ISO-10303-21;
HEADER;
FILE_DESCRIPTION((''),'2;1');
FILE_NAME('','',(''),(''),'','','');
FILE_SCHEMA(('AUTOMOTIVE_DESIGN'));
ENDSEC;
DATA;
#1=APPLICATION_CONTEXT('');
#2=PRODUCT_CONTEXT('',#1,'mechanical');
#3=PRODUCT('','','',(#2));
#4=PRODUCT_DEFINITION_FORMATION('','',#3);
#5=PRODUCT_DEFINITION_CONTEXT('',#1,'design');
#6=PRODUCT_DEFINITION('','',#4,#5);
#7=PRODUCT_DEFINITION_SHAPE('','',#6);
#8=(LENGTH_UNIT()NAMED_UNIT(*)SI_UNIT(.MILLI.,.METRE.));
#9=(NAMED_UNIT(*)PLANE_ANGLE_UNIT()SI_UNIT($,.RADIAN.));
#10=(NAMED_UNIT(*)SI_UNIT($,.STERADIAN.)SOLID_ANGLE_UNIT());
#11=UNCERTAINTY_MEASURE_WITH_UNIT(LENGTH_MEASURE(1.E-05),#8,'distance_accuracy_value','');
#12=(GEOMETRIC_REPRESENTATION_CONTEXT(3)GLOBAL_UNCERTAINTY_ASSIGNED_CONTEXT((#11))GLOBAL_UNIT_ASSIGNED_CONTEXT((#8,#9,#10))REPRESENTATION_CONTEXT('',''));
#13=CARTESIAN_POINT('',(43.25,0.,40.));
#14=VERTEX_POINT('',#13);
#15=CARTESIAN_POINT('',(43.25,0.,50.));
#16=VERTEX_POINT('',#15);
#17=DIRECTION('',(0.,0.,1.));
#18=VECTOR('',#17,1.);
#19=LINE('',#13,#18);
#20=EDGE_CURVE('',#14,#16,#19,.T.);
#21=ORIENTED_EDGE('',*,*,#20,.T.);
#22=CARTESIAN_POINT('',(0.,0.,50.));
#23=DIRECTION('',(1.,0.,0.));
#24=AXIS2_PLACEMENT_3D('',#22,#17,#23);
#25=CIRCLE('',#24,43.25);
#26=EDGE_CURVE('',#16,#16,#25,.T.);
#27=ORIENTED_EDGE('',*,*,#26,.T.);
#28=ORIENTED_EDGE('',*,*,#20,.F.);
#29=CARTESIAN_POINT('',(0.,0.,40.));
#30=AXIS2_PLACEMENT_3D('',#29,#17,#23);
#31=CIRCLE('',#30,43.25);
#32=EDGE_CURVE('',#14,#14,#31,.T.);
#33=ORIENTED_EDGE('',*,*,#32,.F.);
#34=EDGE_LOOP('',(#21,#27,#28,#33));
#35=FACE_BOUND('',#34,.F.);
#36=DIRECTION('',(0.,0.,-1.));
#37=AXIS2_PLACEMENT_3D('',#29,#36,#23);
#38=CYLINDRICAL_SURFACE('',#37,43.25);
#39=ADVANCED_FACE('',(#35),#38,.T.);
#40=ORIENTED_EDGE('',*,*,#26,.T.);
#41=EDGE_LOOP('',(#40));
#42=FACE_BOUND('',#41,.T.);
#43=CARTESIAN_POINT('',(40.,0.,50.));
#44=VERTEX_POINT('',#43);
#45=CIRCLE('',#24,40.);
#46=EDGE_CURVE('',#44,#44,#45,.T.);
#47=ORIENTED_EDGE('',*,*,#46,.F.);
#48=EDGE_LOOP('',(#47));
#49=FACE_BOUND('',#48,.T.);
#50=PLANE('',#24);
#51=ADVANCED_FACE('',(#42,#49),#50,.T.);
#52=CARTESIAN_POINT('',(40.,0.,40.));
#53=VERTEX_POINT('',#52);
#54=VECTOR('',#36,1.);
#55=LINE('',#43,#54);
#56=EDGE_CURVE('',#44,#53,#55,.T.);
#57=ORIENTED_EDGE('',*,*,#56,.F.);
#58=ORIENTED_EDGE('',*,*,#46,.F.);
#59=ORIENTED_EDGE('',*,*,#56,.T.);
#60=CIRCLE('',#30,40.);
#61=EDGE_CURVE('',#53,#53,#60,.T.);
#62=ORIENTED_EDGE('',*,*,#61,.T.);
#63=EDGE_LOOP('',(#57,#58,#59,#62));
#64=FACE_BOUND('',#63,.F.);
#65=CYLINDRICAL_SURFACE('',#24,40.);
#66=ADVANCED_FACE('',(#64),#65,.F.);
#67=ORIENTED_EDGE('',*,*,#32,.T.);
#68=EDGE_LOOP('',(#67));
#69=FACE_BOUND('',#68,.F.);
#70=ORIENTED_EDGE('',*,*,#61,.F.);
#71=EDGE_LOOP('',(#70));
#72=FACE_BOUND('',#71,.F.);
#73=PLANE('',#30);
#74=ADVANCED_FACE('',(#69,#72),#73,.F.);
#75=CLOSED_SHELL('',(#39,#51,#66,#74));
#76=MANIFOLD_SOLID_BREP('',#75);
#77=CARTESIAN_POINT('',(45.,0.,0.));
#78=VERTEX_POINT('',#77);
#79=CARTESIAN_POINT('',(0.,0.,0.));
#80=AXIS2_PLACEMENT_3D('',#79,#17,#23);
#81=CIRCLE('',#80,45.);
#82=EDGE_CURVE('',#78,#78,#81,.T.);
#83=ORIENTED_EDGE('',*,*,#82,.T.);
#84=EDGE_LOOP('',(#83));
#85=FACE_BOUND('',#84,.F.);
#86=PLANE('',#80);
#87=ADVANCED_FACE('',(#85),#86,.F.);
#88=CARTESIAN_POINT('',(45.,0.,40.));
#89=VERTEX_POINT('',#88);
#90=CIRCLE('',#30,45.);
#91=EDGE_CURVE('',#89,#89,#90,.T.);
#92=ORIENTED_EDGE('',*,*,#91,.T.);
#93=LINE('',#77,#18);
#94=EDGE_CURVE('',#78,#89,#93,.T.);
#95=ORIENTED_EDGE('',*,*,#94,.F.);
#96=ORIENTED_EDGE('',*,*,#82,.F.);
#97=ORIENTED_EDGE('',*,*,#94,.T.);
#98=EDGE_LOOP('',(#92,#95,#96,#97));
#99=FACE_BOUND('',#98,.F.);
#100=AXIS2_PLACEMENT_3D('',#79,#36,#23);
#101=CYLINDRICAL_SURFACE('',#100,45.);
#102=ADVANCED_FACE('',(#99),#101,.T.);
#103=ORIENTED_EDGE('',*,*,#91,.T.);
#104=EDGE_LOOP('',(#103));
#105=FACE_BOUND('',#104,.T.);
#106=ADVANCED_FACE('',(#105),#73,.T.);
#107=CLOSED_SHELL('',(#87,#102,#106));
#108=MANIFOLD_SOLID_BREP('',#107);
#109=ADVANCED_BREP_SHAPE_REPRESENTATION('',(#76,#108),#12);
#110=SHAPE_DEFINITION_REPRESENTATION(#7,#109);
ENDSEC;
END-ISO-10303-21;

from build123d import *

# Parameters (mm, degrees)
F0_R     = 45
F1_DEPTH = 40
F2_R     = 43.25
F3_DEPTH = 10
F4_R     = 40
F5_DEPTH = 40


with BuildPart() as f1:
    # F0 (on Top) → F1 (new body)
    with BuildSketch(Plane.XY):
        Circle(F0_R)
    extrude(amount=F1_DEPTH)


with BuildPart() as f3:
    # F2 (on face) → F3 (new body)
    with BuildSketch(Plane.XY.offset(40)):
        Circle(F2_R)
    extrude(amount=F3_DEPTH)

    # F4 (on face) → F5 (cut)
    with BuildSketch(Plane.XY.offset(50)):
        Circle(F4_R)
    extrude(amount=-F5_DEPTH, mode=Mode.SUBTRACT)


solid = Compound([f1.part, f3.part])
